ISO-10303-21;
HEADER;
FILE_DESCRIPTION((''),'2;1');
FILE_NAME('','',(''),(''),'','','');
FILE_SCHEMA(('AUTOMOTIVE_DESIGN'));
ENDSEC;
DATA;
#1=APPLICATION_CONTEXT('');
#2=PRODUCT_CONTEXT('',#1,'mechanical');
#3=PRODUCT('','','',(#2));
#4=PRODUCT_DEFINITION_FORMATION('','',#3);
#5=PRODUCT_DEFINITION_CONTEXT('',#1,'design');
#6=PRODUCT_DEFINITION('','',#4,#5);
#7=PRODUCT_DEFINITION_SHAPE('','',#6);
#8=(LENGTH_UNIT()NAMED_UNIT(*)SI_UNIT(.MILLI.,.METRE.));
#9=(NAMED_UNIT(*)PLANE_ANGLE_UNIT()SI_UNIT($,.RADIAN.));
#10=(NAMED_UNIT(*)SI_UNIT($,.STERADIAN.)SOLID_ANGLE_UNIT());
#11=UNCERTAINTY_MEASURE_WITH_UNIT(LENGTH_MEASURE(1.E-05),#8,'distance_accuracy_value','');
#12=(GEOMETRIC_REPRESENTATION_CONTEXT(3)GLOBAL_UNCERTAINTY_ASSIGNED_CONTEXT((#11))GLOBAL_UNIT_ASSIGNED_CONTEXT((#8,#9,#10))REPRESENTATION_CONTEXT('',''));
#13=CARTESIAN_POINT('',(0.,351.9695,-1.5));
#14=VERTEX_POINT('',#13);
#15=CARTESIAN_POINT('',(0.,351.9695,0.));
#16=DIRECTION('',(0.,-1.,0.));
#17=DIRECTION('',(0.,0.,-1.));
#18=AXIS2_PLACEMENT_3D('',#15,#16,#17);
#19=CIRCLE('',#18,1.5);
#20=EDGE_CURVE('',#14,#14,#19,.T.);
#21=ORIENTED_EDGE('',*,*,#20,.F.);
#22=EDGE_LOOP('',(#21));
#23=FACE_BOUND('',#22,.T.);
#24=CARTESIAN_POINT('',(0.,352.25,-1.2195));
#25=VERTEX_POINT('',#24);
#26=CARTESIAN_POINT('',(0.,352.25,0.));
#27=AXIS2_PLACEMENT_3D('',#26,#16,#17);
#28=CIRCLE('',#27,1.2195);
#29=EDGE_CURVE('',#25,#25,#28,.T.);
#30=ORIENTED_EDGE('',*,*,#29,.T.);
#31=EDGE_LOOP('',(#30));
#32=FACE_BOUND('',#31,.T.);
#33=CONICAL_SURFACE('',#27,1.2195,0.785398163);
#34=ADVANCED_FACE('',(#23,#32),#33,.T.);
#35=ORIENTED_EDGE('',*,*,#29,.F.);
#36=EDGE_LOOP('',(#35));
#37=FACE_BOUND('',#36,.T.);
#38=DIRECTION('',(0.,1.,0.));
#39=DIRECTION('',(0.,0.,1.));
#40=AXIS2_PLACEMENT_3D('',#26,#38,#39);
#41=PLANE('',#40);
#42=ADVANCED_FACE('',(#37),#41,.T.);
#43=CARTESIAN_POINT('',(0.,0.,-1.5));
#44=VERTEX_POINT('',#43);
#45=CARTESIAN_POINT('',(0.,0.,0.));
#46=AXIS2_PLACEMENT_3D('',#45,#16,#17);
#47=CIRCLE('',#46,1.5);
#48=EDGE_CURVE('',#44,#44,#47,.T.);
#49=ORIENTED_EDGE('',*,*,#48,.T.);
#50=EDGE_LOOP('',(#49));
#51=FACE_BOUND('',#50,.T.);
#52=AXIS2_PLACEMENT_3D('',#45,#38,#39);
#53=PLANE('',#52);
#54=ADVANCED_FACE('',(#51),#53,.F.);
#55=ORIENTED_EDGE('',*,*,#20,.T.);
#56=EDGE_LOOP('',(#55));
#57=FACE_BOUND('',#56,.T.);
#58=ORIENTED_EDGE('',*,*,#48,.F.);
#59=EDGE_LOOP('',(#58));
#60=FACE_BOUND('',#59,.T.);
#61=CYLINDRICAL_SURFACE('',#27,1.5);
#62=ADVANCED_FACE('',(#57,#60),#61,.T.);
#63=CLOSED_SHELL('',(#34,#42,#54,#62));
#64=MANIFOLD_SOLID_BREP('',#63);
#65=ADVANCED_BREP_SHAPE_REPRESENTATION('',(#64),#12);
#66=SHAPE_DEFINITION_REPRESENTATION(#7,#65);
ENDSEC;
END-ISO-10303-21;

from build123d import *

# Parameters (mm, degrees)
SKETCH1_R           = 2
BOSS_EXTRUDE1_DEPTH = 352.25


# Read off the part's stored shape, not the designer's step: M3x0.5 Machine Threads Stud1
with BuildPart() as part:
    # Sketch1 → Boss-Extrude1 (new body)
    with BuildSketch(Plane(origin=(0, 0, 0), x_dir=(1, 0, 0), z_dir=(0, 1, 0))):
        with Locations(Location((0, 0, 0), (0, 0, 90))):
            Circle(SKETCH1_R)
    extrude(amount=BOSS_EXTRUDE1_DEPTH)

    # M3x0.5 Machine Threads Stud1 outline → M3x0.5 Machine Threads Stud1 (revolve, cut)
    with BuildSketch(Plane.XY):
        Polygon((2, 352.25), (1.2195, 352.25), (1.5, 351.9695), (1.5, 0), (2, 0), align=None)
    revolve(axis=Axis((0, 0, 0), (0, 1, 0)), mode=Mode.SUBTRACT)


solid = part.part
